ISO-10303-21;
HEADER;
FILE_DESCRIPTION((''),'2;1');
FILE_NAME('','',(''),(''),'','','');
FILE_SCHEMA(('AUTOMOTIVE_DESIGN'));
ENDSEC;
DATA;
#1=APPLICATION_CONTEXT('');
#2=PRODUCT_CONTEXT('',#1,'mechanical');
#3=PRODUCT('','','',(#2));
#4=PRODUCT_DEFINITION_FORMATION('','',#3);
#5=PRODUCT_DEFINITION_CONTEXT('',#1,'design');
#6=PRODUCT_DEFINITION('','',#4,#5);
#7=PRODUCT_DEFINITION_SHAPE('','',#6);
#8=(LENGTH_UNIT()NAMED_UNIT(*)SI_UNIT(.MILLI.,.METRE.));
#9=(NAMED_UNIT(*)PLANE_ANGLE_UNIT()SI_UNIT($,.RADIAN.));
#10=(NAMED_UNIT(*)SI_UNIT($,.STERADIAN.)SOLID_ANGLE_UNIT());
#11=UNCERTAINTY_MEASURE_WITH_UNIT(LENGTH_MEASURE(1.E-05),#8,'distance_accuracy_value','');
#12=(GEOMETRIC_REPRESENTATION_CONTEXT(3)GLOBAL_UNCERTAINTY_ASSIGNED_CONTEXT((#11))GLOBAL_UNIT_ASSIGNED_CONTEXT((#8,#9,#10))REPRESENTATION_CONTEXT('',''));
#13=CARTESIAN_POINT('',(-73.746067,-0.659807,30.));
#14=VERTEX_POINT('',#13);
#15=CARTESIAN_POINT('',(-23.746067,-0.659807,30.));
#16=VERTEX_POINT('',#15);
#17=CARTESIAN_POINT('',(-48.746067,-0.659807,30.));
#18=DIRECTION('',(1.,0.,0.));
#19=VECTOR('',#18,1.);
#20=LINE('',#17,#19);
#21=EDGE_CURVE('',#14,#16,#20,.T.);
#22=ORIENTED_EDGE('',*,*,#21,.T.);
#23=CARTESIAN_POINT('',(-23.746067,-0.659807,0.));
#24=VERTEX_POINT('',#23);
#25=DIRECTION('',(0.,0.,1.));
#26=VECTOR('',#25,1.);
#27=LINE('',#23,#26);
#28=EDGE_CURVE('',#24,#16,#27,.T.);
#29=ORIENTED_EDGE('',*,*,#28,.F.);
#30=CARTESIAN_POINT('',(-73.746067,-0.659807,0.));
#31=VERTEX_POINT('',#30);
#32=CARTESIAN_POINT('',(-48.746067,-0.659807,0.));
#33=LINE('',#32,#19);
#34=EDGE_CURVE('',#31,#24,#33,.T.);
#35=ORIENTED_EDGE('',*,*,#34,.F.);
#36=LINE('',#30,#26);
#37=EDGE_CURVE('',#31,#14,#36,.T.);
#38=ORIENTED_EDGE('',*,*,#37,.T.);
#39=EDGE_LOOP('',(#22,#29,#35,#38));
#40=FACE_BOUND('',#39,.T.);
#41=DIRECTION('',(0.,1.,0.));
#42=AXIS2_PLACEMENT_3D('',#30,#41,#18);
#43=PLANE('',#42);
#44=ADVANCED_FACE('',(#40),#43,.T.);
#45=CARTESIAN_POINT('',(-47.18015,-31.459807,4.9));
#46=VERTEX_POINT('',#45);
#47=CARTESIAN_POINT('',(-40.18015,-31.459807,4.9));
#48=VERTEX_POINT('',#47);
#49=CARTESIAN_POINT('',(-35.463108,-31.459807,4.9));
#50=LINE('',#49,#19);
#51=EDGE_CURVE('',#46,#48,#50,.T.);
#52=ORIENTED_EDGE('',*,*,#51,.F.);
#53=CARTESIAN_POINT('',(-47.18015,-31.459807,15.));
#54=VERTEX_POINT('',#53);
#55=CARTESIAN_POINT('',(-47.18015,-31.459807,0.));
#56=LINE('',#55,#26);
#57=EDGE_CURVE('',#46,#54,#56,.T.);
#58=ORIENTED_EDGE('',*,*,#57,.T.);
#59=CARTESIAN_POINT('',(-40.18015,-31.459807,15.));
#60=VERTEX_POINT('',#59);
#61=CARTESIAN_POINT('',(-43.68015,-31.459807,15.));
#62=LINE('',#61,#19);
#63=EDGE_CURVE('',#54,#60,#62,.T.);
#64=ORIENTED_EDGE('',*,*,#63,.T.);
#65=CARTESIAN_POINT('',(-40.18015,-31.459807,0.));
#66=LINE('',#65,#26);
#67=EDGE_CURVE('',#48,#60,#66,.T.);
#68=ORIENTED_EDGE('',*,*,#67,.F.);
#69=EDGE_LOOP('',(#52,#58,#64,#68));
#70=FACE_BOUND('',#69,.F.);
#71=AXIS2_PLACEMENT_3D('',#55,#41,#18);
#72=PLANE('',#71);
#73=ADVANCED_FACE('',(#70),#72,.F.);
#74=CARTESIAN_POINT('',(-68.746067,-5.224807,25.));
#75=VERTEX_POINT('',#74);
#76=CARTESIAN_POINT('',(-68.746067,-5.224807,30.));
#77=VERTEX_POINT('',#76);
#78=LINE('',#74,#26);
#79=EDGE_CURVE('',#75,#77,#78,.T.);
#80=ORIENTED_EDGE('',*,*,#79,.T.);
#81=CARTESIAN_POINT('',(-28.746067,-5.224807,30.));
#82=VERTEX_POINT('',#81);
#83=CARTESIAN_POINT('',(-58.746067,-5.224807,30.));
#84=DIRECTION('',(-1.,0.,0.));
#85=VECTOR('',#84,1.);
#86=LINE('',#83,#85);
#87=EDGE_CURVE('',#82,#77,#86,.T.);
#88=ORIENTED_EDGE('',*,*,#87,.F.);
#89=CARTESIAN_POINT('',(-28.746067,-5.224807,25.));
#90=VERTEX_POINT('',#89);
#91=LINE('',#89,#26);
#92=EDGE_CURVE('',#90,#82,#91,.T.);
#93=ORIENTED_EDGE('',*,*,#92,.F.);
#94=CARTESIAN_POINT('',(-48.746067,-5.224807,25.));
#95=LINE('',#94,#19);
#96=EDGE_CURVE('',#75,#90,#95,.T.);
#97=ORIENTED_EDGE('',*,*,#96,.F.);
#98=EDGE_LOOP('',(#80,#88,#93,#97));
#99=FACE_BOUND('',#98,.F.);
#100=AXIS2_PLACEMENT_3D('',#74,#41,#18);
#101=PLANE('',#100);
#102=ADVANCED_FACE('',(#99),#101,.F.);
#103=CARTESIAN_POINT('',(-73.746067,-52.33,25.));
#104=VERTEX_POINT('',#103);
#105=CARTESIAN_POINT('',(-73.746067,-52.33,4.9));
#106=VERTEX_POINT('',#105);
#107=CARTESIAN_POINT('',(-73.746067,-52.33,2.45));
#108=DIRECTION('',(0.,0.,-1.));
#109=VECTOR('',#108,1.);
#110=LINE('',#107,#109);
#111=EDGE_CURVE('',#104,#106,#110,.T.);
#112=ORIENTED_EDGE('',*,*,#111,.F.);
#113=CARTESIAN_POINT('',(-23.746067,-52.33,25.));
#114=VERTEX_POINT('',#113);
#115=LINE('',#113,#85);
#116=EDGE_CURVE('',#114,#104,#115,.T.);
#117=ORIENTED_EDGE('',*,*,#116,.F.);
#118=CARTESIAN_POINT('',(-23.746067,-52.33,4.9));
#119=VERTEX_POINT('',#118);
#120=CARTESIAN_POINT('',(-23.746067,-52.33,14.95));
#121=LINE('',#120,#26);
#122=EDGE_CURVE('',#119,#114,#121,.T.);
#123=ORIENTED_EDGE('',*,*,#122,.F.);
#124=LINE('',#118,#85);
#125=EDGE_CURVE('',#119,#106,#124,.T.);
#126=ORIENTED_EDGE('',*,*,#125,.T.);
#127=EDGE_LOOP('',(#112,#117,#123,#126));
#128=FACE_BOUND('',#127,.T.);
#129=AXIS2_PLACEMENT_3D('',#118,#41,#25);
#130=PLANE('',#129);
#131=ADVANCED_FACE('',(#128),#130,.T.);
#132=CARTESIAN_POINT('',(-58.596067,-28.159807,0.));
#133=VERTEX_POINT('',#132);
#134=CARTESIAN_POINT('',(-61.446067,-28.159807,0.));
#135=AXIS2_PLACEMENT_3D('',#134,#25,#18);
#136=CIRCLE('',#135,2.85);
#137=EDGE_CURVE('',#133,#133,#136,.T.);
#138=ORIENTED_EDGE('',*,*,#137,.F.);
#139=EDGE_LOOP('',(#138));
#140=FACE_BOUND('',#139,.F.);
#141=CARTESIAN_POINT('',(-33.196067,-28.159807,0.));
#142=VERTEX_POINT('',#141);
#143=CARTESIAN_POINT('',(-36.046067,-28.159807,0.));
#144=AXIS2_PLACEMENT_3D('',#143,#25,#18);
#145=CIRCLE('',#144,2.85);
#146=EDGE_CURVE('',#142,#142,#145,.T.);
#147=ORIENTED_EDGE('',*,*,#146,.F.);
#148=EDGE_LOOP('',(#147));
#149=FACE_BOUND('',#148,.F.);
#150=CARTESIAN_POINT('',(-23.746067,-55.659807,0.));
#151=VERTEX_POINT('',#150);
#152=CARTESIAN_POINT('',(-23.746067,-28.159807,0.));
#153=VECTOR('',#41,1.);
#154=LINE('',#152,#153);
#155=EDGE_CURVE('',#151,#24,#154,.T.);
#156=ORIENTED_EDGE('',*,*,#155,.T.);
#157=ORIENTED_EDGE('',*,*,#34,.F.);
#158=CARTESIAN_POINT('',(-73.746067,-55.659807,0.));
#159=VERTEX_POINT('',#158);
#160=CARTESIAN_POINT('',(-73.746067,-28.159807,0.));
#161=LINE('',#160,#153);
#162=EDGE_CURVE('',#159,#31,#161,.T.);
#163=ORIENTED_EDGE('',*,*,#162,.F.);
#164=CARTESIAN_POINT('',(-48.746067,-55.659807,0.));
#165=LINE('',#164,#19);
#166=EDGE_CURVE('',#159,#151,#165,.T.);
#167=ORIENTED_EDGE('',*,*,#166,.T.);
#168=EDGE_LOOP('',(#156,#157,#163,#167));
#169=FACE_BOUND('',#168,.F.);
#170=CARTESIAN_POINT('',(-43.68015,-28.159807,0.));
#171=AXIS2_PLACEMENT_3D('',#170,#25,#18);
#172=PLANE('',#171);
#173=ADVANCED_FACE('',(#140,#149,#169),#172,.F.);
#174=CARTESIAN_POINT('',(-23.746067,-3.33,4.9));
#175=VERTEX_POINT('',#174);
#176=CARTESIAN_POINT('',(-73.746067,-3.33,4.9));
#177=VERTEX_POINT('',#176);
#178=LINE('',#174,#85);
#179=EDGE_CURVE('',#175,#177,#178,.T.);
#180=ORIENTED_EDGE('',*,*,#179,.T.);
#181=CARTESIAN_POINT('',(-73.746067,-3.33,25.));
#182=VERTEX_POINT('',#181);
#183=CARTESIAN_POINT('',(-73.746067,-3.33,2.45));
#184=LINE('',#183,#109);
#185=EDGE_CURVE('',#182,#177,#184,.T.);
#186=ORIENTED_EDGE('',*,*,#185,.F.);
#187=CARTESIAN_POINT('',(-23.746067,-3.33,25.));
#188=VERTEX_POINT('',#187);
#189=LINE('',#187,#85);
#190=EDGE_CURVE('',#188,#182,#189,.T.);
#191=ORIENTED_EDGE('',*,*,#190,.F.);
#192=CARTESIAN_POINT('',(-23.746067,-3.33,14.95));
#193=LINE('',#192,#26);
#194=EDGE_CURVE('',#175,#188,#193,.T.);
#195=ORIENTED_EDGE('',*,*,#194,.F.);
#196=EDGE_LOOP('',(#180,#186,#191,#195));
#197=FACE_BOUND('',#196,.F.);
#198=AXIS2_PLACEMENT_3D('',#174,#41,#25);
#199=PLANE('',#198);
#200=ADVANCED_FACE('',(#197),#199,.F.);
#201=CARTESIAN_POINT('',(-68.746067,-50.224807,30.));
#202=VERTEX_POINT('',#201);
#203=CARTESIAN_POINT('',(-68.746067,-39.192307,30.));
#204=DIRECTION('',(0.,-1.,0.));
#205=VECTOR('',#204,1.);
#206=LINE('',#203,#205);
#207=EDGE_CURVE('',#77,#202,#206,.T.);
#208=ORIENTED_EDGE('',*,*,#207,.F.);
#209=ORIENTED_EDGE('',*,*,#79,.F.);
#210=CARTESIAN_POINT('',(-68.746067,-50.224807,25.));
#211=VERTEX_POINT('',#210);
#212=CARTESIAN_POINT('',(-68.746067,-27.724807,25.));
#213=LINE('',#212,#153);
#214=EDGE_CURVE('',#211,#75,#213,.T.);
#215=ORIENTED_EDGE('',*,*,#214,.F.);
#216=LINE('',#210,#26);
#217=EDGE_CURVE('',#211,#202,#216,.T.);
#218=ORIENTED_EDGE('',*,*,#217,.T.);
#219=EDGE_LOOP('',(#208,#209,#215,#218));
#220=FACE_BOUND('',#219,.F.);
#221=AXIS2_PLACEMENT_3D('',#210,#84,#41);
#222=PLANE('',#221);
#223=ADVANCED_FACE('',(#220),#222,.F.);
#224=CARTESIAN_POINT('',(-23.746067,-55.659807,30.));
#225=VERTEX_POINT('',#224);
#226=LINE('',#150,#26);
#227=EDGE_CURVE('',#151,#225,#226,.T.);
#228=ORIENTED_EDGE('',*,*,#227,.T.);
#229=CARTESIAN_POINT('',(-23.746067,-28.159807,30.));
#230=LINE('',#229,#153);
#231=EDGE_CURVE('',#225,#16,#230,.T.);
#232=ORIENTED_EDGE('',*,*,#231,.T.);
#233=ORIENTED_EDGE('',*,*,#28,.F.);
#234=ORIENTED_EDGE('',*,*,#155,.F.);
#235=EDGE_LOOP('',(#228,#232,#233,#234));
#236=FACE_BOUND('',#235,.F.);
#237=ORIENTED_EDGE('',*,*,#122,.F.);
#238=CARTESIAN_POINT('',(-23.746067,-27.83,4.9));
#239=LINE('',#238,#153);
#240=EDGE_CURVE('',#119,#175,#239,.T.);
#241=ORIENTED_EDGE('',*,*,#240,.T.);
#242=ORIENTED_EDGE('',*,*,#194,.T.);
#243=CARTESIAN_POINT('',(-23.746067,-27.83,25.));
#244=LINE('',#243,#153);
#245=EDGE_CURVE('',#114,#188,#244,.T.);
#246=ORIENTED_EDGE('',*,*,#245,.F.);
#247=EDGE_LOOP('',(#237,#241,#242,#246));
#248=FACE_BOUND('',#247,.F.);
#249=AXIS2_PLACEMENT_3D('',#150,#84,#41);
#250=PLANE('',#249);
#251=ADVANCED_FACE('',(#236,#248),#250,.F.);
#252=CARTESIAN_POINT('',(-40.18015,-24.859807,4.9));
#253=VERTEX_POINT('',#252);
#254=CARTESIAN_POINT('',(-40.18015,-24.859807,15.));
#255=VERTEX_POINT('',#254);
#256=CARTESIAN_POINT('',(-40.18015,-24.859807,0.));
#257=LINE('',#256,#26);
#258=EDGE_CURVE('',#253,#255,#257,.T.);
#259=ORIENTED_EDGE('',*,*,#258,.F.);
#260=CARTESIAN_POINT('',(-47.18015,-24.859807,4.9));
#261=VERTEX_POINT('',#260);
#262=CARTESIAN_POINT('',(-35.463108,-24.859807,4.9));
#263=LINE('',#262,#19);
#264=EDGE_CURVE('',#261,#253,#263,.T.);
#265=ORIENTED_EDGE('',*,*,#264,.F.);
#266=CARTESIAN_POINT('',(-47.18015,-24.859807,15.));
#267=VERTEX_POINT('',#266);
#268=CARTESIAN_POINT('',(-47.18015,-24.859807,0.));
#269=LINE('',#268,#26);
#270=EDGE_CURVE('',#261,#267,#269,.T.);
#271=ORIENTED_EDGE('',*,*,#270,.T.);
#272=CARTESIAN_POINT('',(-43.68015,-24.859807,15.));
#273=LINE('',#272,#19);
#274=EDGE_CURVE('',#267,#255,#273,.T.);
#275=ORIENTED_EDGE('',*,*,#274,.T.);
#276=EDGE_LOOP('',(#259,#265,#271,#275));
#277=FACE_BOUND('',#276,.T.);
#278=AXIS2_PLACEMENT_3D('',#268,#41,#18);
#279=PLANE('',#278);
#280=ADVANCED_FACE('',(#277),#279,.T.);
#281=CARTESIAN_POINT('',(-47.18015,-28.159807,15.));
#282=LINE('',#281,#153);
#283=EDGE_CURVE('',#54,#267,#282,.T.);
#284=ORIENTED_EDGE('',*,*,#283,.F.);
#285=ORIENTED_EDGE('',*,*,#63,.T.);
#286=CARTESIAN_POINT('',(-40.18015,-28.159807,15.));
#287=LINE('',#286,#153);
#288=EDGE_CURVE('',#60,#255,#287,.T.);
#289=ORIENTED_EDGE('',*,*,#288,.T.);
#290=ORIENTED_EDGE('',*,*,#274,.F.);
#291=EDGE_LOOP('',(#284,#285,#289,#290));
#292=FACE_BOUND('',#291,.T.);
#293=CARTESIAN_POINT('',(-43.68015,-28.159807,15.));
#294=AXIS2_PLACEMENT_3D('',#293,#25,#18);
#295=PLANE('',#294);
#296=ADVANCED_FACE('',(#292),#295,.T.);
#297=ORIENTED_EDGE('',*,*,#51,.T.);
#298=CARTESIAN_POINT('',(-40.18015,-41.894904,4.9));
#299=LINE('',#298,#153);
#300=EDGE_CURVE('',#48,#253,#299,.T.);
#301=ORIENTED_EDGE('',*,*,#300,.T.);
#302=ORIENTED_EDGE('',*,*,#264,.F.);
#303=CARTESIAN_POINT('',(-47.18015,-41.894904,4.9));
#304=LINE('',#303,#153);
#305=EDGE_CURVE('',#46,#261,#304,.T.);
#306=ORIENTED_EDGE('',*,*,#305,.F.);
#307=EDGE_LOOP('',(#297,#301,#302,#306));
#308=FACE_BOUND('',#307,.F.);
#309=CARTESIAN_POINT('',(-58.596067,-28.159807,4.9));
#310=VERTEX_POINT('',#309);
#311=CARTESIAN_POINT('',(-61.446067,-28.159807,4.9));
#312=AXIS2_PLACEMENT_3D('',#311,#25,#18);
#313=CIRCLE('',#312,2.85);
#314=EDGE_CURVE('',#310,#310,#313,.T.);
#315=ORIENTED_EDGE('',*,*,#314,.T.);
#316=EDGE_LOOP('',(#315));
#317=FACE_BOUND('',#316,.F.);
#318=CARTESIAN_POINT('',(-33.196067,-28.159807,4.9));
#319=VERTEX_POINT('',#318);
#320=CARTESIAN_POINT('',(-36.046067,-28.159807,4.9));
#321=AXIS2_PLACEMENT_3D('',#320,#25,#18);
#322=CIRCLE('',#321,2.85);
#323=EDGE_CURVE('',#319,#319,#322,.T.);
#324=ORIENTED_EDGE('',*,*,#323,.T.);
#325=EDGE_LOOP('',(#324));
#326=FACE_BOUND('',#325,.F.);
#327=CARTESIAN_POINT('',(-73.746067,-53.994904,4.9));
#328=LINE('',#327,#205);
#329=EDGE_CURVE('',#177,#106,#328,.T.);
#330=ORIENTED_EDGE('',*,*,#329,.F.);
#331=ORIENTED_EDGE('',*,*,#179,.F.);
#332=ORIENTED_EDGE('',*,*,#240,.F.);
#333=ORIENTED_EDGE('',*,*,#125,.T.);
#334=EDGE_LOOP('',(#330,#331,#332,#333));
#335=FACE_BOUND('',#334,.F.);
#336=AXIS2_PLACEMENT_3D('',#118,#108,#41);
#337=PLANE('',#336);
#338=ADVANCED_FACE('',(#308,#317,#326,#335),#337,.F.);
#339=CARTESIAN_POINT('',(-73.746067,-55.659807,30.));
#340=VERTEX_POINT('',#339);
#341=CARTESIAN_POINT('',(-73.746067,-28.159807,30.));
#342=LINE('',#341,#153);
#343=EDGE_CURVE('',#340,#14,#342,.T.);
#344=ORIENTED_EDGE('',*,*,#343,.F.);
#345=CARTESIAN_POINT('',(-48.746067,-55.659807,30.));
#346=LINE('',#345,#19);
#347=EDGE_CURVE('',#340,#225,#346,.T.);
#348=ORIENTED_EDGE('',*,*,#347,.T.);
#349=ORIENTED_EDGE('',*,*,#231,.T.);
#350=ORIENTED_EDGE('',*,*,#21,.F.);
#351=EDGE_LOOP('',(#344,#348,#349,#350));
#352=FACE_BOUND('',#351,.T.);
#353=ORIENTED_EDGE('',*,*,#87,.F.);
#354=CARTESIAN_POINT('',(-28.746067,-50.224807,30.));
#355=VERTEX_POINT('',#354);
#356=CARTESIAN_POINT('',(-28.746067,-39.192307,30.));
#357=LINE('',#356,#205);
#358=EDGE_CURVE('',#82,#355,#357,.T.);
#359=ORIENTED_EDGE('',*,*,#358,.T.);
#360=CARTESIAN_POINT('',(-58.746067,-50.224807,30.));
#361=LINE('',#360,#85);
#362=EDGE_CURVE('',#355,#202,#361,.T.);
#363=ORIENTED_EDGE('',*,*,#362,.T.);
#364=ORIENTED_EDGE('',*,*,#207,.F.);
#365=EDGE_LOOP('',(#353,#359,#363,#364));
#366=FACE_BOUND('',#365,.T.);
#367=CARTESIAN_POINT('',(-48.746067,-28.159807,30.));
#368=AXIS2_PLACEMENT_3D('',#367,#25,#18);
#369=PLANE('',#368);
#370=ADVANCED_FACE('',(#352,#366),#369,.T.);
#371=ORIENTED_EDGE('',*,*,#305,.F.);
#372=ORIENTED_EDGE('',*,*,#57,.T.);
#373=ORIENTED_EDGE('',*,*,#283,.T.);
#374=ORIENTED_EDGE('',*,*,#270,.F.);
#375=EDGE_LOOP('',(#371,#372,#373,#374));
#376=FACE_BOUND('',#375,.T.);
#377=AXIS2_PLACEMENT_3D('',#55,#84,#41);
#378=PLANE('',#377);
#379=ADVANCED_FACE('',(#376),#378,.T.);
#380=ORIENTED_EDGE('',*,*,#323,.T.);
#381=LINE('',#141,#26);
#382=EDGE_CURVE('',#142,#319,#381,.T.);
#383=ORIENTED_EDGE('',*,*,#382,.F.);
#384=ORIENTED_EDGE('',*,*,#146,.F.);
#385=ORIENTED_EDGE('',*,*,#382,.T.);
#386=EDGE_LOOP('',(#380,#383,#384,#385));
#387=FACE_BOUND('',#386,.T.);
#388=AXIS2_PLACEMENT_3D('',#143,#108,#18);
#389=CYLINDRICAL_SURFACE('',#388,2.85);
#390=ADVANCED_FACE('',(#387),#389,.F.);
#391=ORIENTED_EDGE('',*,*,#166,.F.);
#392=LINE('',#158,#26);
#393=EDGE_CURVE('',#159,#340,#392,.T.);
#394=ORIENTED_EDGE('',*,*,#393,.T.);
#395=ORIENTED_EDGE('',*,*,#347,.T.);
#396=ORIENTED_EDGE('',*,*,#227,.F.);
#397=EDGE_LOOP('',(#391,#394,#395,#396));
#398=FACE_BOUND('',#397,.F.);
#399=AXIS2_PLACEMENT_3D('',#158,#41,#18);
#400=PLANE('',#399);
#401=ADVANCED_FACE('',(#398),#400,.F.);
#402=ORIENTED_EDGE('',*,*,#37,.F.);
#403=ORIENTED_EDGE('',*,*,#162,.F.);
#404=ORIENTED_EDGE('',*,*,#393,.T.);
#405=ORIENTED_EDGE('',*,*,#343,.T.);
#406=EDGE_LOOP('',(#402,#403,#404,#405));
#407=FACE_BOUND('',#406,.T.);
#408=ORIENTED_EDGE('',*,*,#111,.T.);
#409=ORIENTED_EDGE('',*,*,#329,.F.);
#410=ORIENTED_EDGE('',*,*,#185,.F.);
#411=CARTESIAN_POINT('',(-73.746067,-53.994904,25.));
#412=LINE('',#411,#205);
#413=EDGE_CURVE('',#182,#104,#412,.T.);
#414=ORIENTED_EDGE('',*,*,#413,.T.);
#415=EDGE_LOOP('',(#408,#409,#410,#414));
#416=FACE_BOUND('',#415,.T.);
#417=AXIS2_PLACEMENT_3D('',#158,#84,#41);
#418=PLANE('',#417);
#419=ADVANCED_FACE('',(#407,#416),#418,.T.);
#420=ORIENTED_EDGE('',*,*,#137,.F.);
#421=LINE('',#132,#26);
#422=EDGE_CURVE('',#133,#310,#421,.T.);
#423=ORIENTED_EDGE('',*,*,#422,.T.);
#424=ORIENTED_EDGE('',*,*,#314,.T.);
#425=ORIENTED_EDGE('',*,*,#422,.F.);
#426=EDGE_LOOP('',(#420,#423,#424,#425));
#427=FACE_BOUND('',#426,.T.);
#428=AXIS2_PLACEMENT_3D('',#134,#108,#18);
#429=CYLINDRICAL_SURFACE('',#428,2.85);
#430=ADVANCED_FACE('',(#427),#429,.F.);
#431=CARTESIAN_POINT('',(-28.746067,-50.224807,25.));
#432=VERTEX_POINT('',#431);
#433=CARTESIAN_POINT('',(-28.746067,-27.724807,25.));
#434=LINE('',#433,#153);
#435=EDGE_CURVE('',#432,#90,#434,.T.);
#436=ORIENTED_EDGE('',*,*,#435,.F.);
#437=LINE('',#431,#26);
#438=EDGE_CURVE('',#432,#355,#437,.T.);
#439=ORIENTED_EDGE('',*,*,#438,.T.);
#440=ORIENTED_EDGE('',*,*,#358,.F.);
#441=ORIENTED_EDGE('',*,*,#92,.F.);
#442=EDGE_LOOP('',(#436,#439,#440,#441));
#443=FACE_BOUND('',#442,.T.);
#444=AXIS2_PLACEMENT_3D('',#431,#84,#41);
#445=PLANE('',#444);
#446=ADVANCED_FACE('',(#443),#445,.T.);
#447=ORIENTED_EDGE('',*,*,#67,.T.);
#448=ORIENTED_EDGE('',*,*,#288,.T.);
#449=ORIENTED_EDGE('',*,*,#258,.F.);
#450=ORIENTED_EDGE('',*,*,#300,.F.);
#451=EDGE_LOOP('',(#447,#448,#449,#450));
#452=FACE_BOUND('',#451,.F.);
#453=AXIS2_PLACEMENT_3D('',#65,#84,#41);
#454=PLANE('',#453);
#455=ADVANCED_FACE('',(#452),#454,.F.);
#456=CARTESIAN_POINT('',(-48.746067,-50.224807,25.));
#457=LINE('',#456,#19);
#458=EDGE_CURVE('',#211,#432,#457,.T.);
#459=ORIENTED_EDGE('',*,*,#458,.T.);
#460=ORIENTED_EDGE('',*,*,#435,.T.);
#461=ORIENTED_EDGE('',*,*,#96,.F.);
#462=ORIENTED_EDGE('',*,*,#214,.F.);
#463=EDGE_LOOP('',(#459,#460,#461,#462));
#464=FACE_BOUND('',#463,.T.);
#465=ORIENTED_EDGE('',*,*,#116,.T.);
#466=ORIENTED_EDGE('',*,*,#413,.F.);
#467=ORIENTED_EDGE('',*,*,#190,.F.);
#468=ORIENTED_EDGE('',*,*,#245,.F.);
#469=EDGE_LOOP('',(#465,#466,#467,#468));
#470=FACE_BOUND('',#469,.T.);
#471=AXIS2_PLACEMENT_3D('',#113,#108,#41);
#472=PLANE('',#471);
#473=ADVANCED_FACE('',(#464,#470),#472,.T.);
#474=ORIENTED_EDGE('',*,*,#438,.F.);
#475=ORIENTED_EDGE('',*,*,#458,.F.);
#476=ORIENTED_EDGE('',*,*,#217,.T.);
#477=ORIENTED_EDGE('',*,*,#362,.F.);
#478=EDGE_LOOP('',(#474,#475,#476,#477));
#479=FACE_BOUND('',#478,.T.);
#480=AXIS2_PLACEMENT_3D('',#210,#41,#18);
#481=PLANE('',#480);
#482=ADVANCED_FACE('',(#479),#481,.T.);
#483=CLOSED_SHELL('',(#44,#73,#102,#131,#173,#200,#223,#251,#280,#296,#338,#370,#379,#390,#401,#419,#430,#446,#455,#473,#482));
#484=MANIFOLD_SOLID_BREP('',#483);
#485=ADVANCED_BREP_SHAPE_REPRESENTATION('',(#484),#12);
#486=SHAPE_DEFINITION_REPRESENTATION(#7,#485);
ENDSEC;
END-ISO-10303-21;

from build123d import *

# Parameters (mm, degrees)
F2_W     = 50
F2_H     = 55
F3_DEPTH = 30
F4_W     = 49
F4_H     = 20.1
F5_DEPTH = 50.001
F0_R     = 2.85
F6_DEPTH = 4.9
F0_W     = 7
F0_H     = 6.6
F7_DEPTH = 15
F8_START = 25
F1_W     = 40
F1_H     = 45
F8_DEPTH = 25


# Not quite as in the source:
# - a feature names something its author has since deleted; it is built from what else it names


with BuildPart() as f3:
    # F2 (on Top) → F3 (new body)
    with BuildSketch(Plane.XY):
        with Locations((-48.7460665315, -28.1598071134)):
            Rectangle(F2_W, F2_H)
    extrude(amount=F3_DEPTH)

    # F4 (on face) → F5 (cut, through all)
    with BuildSketch(Plane.YZ.offset(-23.7460665315)):
        with Locations((-27.83, 14.95)):
            Rectangle(F4_W, F4_H)
    extrude(amount=-F5_DEPTH, mode=Mode.SUBTRACT)

    # F0 (on Top) → F6 (cut, through all)
    with BuildSketch(Plane.XY):
        with Locations((-36.0460665315, -28.1598071134)):
            Circle(F0_R)
        with Locations((-61.4460665315, -28.1598071134)):
            Circle(F0_R)
    extrude(amount=F6_DEPTH, mode=Mode.SUBTRACT)

    # F0 (on Top) → F7 (join)
    with BuildSketch(Plane.XY):
        with Locations((-43.6801504195, -28.1598071134)):
            Rectangle(F0_W, F0_H)
    extrude(amount=F7_DEPTH)

    # F1 (on Top) → F8 (cut)
    with BuildSketch(Plane.XY.offset(F8_START)):
        with Locations((-48.7460665315, -27.7248071134)):
            Rectangle(F1_W, F1_H)
    extrude(amount=F8_DEPTH, mode=Mode.SUBTRACT)


solid = f3.part
